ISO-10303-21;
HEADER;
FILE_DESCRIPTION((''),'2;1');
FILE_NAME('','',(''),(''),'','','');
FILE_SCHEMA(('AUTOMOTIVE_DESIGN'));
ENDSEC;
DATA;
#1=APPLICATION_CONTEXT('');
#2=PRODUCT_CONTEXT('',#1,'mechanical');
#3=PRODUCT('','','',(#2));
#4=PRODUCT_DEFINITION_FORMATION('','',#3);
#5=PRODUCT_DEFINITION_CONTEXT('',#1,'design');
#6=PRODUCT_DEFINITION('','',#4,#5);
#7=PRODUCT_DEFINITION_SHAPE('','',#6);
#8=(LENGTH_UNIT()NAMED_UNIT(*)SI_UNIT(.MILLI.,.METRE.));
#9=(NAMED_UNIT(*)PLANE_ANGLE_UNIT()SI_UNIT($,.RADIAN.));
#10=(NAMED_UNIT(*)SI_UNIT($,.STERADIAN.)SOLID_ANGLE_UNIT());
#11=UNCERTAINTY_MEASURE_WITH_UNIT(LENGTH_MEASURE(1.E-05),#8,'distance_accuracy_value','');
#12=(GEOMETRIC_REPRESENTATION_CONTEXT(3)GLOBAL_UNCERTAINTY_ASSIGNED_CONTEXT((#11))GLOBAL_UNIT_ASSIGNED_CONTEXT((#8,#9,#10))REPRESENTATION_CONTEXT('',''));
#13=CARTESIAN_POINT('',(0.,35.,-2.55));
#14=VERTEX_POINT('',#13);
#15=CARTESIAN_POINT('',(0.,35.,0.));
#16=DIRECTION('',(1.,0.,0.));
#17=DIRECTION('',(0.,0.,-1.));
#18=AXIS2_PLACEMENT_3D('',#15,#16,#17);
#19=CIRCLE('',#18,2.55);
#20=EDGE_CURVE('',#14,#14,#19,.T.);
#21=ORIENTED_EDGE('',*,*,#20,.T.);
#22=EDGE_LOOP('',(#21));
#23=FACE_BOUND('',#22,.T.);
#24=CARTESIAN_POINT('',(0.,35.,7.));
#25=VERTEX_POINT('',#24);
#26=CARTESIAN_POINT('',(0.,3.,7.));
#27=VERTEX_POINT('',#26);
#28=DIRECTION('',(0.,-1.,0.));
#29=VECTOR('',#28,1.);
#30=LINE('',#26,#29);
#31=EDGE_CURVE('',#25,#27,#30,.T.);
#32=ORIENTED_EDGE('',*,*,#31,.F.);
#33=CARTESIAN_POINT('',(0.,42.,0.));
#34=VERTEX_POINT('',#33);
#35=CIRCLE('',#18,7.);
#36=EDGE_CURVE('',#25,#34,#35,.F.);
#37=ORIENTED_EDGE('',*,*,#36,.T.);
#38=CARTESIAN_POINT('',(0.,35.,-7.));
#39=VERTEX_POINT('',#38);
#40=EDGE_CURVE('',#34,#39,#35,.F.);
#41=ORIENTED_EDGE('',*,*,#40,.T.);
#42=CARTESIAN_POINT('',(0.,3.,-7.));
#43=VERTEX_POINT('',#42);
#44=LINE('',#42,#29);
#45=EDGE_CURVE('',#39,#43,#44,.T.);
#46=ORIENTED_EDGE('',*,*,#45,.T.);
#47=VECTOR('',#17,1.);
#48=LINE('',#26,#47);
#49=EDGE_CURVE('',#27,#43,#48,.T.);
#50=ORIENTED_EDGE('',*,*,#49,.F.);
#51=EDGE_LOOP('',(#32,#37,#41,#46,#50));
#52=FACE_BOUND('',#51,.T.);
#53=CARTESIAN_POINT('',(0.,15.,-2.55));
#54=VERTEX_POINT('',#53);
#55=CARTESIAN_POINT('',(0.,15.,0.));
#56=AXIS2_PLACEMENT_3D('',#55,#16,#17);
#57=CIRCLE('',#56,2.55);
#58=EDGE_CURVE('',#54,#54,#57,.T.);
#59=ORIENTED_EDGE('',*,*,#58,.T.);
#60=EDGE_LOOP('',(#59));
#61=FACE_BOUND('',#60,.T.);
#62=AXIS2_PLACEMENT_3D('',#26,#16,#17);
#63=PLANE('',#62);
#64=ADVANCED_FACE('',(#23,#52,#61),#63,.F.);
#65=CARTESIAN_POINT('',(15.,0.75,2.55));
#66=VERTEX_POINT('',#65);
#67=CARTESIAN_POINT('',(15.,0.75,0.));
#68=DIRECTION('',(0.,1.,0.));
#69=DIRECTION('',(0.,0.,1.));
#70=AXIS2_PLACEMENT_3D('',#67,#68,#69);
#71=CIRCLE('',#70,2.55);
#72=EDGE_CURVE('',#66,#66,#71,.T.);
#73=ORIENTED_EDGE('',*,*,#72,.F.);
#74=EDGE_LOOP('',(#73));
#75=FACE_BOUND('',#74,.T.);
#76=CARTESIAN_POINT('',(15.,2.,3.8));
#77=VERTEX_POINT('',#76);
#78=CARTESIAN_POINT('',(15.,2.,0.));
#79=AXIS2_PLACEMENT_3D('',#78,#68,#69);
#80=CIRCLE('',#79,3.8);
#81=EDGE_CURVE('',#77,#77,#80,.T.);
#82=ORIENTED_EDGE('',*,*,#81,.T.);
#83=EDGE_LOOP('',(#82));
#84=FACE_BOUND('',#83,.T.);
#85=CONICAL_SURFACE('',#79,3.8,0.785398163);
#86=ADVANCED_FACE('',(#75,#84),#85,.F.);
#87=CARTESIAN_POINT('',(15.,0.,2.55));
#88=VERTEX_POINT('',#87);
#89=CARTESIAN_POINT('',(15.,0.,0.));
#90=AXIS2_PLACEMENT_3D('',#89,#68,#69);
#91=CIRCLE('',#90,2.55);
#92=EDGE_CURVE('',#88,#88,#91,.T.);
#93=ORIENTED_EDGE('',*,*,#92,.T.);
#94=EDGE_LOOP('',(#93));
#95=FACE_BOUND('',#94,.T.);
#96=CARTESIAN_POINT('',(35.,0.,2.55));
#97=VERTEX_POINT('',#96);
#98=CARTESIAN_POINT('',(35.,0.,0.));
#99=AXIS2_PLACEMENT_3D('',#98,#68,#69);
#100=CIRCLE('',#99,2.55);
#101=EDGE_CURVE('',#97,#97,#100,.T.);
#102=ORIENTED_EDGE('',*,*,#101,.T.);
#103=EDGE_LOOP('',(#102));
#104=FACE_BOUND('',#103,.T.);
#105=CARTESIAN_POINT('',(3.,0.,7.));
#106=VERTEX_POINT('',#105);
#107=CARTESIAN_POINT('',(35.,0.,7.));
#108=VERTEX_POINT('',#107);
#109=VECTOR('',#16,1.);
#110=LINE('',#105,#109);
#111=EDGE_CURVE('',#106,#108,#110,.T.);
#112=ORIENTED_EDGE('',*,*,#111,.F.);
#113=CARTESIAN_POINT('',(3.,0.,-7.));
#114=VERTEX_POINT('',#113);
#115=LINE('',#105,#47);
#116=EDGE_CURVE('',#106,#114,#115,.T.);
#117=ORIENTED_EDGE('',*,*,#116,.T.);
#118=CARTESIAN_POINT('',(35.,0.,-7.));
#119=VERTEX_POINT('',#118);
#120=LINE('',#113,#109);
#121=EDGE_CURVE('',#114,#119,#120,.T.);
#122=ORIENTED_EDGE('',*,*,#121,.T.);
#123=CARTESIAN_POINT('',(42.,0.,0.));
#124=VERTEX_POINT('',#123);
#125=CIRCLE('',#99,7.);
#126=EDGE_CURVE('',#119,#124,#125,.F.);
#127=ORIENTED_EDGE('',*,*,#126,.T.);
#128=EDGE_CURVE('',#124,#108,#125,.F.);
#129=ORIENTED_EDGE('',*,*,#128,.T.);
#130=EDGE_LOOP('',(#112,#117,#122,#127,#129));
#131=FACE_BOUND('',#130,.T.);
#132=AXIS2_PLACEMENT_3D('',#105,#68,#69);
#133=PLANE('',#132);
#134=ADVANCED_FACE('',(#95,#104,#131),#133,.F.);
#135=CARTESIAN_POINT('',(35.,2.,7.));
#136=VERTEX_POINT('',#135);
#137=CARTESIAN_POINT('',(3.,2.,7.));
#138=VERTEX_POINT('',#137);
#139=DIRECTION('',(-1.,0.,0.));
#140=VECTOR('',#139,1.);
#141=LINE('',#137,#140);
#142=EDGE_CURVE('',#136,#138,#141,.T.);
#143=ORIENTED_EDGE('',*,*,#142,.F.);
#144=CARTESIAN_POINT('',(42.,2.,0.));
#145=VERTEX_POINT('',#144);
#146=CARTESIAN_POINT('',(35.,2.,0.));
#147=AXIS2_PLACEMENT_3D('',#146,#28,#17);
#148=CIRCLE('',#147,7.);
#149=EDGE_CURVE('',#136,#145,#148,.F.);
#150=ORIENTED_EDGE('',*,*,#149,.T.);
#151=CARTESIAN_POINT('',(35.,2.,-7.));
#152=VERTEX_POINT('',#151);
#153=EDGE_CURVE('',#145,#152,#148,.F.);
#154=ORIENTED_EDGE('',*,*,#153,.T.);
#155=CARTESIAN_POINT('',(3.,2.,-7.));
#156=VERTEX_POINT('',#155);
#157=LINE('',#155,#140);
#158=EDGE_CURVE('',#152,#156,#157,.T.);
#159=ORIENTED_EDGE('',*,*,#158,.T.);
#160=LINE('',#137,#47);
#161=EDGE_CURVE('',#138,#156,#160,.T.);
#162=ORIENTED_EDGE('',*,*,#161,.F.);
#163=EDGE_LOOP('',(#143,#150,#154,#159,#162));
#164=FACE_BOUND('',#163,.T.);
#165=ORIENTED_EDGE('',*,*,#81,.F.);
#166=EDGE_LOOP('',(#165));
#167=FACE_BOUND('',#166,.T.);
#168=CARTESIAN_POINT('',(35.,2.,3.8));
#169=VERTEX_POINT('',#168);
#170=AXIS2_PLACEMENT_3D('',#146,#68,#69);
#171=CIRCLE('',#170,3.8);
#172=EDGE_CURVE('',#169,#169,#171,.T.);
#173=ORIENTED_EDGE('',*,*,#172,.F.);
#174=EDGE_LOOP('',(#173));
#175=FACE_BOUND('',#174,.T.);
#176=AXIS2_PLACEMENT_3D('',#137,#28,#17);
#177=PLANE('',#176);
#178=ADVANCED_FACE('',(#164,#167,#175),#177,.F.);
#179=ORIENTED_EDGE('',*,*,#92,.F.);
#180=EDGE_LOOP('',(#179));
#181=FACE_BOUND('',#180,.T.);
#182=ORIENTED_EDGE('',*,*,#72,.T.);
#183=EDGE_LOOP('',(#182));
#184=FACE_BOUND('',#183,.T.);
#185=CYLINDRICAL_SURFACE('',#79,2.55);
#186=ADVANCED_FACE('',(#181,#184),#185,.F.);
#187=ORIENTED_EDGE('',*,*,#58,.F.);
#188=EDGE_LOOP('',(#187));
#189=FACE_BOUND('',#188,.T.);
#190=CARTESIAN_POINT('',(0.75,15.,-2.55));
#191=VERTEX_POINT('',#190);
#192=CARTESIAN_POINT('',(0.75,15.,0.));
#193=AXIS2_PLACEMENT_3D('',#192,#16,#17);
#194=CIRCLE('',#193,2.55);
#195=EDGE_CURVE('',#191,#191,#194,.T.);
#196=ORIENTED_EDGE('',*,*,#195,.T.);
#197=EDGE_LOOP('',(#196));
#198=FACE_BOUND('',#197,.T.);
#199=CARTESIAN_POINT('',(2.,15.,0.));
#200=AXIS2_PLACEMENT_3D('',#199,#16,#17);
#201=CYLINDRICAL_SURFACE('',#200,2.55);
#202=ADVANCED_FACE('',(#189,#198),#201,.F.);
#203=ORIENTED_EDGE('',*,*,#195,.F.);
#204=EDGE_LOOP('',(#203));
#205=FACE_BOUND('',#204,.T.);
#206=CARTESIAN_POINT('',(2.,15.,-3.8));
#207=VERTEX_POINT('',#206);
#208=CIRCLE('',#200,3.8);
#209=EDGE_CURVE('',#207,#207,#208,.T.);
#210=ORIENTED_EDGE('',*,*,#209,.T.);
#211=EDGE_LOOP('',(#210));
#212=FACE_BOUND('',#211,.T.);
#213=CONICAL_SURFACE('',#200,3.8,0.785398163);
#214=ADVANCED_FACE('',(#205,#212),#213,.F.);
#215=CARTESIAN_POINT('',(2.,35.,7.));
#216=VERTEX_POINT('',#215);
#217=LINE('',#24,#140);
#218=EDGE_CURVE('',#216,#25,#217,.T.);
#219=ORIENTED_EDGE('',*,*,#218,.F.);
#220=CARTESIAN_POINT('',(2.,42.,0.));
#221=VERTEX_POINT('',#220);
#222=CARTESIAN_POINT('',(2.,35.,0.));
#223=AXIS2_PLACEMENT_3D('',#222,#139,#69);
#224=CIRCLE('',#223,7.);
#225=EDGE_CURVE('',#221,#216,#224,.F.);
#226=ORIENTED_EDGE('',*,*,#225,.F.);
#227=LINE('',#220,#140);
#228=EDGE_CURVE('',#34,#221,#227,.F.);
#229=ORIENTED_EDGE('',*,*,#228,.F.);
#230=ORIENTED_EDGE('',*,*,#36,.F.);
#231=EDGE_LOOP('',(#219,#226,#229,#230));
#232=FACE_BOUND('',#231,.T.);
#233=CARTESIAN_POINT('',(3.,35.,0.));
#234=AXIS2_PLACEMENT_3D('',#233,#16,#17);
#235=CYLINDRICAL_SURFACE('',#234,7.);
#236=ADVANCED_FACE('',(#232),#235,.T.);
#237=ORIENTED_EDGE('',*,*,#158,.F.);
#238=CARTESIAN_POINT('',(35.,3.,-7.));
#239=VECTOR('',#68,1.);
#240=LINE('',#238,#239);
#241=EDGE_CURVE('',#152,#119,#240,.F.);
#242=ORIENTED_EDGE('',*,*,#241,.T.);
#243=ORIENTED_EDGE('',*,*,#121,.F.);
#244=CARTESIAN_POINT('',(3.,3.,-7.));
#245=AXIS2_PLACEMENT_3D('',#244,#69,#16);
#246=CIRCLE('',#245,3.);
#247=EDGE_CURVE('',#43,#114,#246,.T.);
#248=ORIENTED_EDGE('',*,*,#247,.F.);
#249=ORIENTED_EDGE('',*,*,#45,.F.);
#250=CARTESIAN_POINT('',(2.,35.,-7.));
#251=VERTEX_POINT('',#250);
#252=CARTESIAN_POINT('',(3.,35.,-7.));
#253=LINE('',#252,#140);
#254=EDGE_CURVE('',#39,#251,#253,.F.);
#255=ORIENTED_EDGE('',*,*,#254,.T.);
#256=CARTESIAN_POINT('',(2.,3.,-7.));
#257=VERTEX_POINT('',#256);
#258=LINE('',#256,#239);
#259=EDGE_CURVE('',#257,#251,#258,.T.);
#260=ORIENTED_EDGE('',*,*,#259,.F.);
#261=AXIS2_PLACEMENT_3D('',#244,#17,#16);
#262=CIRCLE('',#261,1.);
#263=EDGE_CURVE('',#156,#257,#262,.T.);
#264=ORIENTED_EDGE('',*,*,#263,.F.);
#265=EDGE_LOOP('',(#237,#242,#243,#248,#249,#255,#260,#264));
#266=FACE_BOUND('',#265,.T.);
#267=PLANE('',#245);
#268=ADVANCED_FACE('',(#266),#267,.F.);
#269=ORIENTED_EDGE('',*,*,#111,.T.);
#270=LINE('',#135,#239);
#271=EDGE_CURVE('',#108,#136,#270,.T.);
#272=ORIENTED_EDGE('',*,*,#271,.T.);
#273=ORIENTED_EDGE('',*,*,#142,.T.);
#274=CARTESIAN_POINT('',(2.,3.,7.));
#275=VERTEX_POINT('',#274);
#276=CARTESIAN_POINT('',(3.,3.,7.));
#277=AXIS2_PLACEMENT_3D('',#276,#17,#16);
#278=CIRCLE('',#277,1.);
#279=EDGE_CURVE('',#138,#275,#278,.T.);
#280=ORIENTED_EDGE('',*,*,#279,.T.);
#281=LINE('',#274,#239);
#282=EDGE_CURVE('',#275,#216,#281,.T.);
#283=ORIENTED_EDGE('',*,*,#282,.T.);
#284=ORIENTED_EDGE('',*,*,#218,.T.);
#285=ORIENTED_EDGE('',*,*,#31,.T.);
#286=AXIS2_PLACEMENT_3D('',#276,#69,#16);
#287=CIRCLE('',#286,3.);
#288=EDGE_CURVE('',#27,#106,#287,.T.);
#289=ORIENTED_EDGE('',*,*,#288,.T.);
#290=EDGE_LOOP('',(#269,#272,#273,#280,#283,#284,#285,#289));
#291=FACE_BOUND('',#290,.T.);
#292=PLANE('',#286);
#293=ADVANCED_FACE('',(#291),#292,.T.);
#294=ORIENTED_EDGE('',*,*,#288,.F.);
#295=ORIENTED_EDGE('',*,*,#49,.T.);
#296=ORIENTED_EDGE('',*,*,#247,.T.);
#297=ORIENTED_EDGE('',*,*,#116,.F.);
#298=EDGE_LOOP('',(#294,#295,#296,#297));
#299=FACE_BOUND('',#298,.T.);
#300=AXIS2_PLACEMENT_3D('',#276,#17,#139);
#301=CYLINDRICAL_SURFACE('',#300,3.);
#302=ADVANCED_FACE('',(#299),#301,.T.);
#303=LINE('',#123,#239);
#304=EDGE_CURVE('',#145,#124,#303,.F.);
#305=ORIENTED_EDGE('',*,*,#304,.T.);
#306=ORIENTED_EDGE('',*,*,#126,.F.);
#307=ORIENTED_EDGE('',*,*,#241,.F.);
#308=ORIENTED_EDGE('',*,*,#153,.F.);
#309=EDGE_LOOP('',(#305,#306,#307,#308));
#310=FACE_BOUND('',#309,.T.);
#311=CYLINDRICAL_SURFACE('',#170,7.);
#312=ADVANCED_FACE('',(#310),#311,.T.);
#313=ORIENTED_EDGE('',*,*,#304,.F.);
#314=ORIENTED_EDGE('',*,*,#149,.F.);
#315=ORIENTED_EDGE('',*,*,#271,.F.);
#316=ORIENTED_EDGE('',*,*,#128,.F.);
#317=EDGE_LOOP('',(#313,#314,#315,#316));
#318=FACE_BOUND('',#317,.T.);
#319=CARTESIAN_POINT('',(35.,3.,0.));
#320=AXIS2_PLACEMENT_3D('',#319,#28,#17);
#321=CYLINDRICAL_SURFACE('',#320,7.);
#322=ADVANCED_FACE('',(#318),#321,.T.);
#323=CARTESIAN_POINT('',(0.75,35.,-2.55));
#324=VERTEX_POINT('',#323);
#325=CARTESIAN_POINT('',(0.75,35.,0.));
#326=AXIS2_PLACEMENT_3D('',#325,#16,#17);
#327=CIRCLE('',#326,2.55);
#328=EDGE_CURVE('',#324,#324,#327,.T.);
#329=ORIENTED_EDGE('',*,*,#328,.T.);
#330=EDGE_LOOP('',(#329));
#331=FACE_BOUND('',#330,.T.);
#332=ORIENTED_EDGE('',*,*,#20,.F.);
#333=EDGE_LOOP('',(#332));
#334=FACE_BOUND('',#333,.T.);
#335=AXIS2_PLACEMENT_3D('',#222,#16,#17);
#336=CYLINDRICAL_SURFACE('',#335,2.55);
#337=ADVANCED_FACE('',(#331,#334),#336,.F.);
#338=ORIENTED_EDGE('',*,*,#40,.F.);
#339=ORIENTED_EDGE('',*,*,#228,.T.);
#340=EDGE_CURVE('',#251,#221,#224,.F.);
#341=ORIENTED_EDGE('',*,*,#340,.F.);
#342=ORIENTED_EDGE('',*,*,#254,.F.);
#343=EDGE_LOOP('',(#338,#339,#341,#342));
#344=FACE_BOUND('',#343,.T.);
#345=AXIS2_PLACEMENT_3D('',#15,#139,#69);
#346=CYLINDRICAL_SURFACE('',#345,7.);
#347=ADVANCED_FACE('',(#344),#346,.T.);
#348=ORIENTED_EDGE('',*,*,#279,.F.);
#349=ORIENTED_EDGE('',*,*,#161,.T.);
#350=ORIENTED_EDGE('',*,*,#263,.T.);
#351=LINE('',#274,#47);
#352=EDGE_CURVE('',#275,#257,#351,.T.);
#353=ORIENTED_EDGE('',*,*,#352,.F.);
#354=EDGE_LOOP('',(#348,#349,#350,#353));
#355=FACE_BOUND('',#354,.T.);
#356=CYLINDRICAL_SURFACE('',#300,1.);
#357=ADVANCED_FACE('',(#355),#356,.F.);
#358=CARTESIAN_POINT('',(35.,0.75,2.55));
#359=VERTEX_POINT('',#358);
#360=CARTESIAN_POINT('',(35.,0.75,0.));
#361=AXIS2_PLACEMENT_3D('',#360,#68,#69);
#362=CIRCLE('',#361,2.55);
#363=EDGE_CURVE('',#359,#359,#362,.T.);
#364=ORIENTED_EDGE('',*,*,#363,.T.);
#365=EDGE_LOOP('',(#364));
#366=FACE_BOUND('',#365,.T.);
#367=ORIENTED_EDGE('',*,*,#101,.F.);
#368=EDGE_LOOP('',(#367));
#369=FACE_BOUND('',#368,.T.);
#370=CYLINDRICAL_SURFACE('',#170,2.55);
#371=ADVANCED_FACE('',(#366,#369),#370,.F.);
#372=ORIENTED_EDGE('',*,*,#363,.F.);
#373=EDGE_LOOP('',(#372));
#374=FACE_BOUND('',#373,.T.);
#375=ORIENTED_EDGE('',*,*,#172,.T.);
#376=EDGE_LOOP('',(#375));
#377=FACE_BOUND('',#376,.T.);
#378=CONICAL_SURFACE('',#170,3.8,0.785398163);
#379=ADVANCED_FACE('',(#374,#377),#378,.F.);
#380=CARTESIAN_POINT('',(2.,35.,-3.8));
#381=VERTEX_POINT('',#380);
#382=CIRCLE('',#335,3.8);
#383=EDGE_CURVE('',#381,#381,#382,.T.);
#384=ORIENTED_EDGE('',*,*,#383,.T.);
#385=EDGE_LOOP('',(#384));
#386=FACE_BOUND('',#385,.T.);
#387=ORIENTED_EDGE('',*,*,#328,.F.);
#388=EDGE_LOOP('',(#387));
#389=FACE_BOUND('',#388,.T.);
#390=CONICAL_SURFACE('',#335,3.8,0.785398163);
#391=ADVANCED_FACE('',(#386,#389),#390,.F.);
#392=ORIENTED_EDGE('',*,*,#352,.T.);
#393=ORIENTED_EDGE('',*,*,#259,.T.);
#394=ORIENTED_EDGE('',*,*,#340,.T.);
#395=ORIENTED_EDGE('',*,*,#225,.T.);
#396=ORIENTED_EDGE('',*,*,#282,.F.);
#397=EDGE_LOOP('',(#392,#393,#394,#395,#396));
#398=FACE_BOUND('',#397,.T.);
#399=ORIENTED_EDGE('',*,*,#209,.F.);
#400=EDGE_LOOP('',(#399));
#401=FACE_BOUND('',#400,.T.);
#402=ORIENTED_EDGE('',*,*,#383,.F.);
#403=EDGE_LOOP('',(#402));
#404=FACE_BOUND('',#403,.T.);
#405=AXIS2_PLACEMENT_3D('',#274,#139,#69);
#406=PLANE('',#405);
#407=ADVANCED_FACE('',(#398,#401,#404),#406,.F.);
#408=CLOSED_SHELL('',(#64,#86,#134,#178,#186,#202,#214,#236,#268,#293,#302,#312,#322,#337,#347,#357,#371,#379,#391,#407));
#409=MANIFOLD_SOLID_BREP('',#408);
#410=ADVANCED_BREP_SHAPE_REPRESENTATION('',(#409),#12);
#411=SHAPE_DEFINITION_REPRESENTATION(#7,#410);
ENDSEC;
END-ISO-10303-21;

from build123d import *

# Parameters (mm, degrees)
BOSS_EXTRU_1_DEPTH                         = 7
CONG_1_R                                   = 7
FRAISAGE_POUR_VIS_T_TE_FRAIS_E_6_2_COUNT   = 2
FRAISAGE_POUR_VIS_T_TE_FRAIS_E_6_2_PITCH   = 20
FRAISAGE_POUR_VIS_T_TE_FRAIS_E_6_3_A_COUNT = 2
FRAISAGE_POUR_VIS_T_TE_FRAIS_E_6_3_A_PITCH = 20


with BuildPart() as part:
    # Esquisse1 → Boss.-Extru.1 (new, symmetric)
    with BuildSketch(Plane.XY):
        with BuildLine():
            Line((0, 3), (0, 42))
            Line((0, 42), (2, 42))
            Line((2, 42), (2, 3))
            ThreePointArc((2, 3), (2.292893219, 2.292893219), (3, 2))
            Line((3, 2), (42, 2))
            Line((42, 2), (42, 0))
            Line((42, 0), (3, 0))
            ThreePointArc((3, 0), (0.878679656, 0.878679656), (0, 3))
        make_face()
    extrude(amount=BOSS_EXTRU_1_DEPTH, both=True)

    # Congé1
    cong_1_edges = [part.edges().sort_by_distance(p)[0] for p in [
        (1, 42, -7),
        (1, 42, 7),
        (42, 1, -7),
        (42, 1, 7),
    ]]
    fillet(cong_1_edges, radius=CONG_1_R - 0.0001)  # a hair under: the kernel refuses the full size

    # Esquisse2 → Fraisage pour vis _ t_te frais_e _ 6 pan (revolve, cut)
    with BuildSketch(Plane(origin=(35, 2, 0), x_dir=(0, 0, 1), z_dir=(1, 0, 0))):
        Polygon((0, 0), (0, 2), (2.55, 2), (2.55, 1.25), (3.8, 0), align=None)
    fraisage_pour_vis_t_te_frais_e_6_pan = revolve(axis=Axis((35, 8.35, 0), (0, -1, 0)), mode=Mode.SUBTRACT)

    # Fraisage pour vis _ t_te frais_e _ 6 2: Fraisage pour vis _ t_te frais_e _ 6 pan ×2
    with Locations(*[(-i * FRAISAGE_POUR_VIS_T_TE_FRAIS_E_6_2_PITCH, 0, 0) for i in range(1, FRAISAGE_POUR_VIS_T_TE_FRAIS_E_6_2_COUNT)]):
        add(fraisage_pour_vis_t_te_frais_e_6_pan, mode=Mode.SUBTRACT)

    # Esquisse4 → Fraisage pour vis _ t_te frais_e _ 6 3 (revolve, cut)
    with BuildSketch(Plane(origin=(2, 35, 0), x_dir=(0, 0, -1), z_dir=(0, 1, 0))):
        Polygon((0, 0), (0, 2), (2.55, 2), (2.55, 1.25), (3.8, 0), align=None)
    fraisage_pour_vis_t_te_frais_e_6_3 = revolve(axis=Axis((8.35, 35, 0), (-1, 0, 0)), mode=Mode.SUBTRACT)

    # Fraisage pour vis _ t_te frais_e _ 6 3 a: Fraisage pour vis _ t_te frais_e _ 6 3 ×2
    with Locations(*[(0, -i * FRAISAGE_POUR_VIS_T_TE_FRAIS_E_6_3_A_PITCH, 0) for i in range(1, FRAISAGE_POUR_VIS_T_TE_FRAIS_E_6_3_A_COUNT)]):
        add(fraisage_pour_vis_t_te_frais_e_6_3, mode=Mode.SUBTRACT)


solid = part.part
